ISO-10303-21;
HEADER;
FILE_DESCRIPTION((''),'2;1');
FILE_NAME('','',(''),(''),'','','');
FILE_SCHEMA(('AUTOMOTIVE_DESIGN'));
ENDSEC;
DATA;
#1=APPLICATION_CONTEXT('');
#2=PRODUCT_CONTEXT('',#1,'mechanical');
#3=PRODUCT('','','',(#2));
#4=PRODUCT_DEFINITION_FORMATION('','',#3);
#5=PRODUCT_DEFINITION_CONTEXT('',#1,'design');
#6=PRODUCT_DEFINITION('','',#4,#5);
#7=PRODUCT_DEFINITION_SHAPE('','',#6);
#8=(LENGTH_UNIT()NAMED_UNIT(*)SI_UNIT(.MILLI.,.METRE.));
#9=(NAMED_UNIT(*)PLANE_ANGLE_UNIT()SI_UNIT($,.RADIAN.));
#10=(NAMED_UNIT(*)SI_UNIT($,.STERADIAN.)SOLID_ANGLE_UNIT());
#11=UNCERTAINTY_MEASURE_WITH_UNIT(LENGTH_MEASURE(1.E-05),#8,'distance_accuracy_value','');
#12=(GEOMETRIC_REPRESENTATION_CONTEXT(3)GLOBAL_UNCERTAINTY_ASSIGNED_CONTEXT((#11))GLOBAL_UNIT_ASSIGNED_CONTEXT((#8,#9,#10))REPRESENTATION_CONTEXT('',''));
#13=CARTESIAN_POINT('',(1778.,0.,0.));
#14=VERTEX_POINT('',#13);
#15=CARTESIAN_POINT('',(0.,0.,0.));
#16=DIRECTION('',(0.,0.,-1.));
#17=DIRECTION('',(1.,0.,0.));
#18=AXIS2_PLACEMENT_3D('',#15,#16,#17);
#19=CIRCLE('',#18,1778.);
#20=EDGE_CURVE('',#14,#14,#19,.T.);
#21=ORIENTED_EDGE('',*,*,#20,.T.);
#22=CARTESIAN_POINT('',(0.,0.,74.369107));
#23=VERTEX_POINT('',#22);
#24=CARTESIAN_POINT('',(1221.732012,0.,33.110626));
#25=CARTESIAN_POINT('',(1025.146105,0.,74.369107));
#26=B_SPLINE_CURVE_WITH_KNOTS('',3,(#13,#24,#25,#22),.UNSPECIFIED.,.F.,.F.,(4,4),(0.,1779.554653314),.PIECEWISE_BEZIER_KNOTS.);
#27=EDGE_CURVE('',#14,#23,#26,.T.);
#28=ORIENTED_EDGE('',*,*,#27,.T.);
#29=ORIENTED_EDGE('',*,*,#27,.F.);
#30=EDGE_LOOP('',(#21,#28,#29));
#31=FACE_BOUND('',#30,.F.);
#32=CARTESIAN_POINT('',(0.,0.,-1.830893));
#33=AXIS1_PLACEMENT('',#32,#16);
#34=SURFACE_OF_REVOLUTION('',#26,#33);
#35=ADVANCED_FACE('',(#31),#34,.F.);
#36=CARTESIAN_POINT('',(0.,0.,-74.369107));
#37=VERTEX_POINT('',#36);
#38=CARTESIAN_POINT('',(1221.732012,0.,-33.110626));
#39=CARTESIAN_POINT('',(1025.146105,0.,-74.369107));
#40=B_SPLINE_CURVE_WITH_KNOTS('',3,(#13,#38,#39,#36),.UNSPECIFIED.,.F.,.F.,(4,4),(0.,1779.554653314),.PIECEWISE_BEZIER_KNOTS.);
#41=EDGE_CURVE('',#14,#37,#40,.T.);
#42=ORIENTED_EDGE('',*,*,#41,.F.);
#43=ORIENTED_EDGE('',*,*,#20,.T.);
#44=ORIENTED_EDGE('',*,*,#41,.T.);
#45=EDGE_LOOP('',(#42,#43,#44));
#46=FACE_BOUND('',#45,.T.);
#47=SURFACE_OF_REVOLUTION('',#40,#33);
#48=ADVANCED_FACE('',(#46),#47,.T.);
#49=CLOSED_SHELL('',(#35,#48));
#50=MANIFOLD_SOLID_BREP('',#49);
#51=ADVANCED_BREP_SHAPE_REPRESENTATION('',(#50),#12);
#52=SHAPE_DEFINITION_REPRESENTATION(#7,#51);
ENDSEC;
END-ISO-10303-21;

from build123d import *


# Not quite as in the source:
# - the program builds the solid bodies; features that only make, move or delete a surface that nothing else refers to are left out


with BuildPart() as f2:
    # F1 (on Front) → F2 (revolve)
    with BuildSketch(Plane.XZ):
        with BuildLine():
            add(Edge.make_bspline(
                [(1778, 0), (1221.7320122719, -33.1106260419), (1025.1461047695, -74.3691073626), (0, -74.3691073626)],
                knots=[0, 0, 0, 0, 1779.5546533136, 1779.5546533136, 1779.5546533136, 1779.5546533136], degree=3))
            add(Edge.make_bspline(
                [(1778, 0), (1221.7320122719, 33.1106260419), (1025.1461047695, 74.3691073626), (0, 74.3691073626)],
                knots=[0, 0, 0, 0, 1779.5546533136, 1779.5546533136, 1779.5546533136, 1779.5546533136], degree=3))
            Line((0, 74.3691073626), (0, -74.3691073626))
        make_face()
    revolve(axis=Axis((0, 0, -1.8308926374), (0, 0, -1)))


solid = f2.part
